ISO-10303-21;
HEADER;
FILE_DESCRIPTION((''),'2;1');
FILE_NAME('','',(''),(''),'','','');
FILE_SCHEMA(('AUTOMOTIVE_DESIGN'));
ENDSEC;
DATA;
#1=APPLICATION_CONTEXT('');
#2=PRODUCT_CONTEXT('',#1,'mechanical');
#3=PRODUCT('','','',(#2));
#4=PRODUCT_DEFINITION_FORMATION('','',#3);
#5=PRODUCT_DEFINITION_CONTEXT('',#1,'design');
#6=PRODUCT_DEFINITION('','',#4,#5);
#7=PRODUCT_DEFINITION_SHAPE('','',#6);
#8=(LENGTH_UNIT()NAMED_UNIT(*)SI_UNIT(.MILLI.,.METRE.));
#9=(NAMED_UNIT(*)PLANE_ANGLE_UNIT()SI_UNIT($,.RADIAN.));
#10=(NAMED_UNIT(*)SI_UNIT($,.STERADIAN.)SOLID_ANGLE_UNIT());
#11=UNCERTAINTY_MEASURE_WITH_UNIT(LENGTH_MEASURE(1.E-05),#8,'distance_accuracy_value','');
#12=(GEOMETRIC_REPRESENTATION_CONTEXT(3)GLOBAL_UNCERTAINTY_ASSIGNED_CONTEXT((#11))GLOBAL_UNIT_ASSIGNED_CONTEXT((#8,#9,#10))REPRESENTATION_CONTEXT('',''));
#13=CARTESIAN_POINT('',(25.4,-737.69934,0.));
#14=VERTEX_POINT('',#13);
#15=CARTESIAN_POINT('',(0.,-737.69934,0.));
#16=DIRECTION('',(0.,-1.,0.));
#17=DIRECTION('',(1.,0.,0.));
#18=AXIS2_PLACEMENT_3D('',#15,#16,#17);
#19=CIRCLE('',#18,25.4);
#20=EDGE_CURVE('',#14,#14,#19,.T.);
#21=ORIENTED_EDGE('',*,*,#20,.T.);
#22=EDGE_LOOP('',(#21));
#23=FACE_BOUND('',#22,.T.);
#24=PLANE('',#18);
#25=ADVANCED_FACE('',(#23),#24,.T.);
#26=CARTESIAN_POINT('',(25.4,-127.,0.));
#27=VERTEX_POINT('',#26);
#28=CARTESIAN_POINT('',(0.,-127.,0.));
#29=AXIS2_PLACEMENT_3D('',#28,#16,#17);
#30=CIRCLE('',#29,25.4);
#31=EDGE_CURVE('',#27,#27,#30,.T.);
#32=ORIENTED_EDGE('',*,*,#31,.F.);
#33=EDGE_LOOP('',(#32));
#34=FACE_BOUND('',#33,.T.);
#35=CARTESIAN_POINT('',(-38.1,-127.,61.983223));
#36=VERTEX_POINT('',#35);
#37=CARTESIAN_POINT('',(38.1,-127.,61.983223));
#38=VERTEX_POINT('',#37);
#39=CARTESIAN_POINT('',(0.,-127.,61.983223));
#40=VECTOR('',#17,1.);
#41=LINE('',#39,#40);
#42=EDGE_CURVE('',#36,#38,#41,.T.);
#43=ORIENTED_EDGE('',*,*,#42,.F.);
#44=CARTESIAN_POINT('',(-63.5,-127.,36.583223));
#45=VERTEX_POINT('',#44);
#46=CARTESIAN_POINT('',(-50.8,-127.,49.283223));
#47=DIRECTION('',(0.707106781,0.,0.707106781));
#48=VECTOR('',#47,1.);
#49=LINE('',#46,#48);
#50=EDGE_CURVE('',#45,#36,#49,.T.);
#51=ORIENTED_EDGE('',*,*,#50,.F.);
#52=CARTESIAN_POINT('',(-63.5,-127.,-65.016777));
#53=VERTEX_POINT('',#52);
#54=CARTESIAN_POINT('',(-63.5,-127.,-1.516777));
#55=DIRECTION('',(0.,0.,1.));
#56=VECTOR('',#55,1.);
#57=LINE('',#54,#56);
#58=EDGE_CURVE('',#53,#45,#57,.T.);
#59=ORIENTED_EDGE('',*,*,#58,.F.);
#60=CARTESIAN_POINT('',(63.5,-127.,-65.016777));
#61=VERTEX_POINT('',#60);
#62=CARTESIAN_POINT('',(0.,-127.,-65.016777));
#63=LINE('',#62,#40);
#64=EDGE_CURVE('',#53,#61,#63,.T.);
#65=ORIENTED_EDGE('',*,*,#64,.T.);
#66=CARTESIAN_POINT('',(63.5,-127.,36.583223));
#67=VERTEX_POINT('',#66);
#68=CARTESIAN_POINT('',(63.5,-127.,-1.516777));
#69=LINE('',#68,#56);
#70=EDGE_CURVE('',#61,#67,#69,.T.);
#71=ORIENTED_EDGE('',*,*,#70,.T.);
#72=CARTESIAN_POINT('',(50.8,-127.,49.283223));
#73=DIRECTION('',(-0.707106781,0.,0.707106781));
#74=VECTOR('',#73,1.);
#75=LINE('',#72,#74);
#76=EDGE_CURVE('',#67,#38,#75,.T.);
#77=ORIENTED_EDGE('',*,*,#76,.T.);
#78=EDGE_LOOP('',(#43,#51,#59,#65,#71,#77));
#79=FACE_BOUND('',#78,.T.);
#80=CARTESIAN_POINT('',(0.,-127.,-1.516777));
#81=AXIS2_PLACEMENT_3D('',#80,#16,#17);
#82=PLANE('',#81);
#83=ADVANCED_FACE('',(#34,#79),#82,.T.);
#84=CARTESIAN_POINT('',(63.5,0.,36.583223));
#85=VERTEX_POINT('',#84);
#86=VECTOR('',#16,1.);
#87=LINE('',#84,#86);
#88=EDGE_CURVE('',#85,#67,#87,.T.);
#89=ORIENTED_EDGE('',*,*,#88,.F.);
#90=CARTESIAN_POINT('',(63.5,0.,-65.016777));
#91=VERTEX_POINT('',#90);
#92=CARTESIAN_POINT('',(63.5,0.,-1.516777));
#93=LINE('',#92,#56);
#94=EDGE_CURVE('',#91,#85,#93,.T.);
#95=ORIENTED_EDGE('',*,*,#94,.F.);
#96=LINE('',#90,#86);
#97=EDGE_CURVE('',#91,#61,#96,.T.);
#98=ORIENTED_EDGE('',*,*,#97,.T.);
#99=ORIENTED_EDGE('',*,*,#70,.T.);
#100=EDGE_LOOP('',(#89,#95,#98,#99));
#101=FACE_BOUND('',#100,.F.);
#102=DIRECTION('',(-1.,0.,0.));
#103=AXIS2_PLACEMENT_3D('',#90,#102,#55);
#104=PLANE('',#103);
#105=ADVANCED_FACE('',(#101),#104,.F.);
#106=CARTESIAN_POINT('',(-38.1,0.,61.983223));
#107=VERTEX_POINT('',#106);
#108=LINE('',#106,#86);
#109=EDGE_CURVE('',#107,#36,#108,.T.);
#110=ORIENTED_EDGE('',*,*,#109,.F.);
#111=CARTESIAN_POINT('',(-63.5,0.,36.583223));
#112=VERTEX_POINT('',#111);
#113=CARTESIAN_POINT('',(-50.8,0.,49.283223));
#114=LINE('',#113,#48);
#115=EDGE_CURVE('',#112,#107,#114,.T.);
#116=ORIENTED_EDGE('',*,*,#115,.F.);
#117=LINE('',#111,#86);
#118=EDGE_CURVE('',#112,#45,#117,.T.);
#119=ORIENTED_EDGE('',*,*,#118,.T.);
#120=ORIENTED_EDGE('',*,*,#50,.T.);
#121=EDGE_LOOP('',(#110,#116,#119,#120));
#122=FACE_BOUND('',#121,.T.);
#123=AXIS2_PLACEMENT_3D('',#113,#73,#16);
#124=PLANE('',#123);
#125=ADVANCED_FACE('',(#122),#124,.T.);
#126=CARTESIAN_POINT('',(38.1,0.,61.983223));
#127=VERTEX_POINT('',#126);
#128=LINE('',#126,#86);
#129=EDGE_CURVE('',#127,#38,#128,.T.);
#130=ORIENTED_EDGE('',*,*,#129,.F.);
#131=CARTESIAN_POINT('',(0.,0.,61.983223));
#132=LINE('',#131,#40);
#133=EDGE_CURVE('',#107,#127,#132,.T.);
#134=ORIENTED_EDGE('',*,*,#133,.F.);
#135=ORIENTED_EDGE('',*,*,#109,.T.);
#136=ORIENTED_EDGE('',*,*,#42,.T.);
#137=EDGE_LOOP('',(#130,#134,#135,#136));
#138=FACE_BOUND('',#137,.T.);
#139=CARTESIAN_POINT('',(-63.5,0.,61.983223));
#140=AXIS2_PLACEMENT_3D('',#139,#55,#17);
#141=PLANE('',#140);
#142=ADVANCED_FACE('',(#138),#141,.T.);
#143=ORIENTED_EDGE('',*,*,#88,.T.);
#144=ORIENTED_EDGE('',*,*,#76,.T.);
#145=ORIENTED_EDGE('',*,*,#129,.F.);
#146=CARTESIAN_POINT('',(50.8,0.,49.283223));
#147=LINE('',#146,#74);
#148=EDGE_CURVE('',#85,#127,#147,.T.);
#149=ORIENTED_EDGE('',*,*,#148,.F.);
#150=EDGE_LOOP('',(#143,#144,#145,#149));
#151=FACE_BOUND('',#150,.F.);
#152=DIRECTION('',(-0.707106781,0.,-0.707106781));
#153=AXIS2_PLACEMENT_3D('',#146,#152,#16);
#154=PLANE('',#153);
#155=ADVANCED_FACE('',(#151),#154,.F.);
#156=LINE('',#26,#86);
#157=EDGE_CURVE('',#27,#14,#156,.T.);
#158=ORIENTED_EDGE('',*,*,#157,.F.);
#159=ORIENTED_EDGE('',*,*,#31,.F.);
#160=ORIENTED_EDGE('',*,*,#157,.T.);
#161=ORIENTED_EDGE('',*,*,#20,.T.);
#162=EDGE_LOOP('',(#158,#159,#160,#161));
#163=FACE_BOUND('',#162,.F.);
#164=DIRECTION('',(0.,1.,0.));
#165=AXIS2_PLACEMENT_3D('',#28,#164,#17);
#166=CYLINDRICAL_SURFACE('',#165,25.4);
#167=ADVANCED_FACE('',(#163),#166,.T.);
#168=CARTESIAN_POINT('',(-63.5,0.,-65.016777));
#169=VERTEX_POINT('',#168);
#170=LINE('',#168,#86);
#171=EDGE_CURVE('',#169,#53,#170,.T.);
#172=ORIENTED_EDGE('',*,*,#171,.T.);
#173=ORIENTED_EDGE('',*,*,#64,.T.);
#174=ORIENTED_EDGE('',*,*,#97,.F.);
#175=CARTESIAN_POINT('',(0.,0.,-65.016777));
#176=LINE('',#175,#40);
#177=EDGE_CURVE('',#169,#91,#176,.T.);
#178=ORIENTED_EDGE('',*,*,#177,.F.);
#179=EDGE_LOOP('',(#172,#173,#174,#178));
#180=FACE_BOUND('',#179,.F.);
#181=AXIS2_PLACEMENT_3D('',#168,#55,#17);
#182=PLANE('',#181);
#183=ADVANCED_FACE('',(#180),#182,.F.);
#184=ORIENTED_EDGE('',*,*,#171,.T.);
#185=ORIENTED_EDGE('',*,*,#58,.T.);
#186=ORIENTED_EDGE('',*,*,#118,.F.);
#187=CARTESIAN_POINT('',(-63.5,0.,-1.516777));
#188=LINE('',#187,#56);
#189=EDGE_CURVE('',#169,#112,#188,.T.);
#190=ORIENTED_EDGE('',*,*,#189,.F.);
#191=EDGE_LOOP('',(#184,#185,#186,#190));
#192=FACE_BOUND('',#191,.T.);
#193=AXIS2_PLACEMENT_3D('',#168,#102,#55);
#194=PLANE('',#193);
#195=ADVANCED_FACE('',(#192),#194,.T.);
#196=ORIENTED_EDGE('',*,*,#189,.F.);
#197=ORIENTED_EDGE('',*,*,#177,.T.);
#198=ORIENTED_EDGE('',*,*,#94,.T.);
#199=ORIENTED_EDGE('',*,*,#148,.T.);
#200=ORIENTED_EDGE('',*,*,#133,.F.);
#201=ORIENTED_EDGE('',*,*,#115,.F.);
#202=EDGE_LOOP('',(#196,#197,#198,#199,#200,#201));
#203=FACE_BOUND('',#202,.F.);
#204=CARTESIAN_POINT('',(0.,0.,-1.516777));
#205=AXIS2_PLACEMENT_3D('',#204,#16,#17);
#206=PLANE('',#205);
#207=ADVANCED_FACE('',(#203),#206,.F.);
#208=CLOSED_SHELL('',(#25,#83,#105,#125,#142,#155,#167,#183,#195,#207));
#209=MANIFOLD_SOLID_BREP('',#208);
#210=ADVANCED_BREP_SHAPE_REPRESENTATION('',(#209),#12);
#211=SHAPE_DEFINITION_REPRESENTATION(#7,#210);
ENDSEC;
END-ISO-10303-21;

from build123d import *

# Parameters (mm, degrees)
F0_W     = 127
F0_H     = 127
F1_DEPTH = 127
F2_SIZE  = 25.4
F3_R     = 25.4
F4_DEPTH = 610.6993397


# Not quite as in the source:
# - an extrude ends at something that could not be found from the text; its depth is read off the source's solid
# - a feature of the source that left no trace in its solid (it failed there, or was rolled back) is left out


with BuildPart() as f1:
    # F0 (on Front) → F1 (new body)
    with BuildSketch(Plane.XZ):
        with Locations((0, -1.5167773236)):
            Rectangle(F0_W, F0_H)
    extrude(amount=F1_DEPTH)

    # F2
    f2_edges = [f1.edges().sort_by_distance(p)[0] for p in [
        (-63.5, -63.5, 61.983223),
        (63.5, -63.5, 61.983223),
    ]]
    chamfer(f2_edges, length=F2_SIZE)

    # F3 (on face) → F4 (join, through all)
    with BuildSketch(Plane.XZ.offset(127)):
        Circle(F3_R)
    extrude(amount=F4_DEPTH)


solid = f1.part
